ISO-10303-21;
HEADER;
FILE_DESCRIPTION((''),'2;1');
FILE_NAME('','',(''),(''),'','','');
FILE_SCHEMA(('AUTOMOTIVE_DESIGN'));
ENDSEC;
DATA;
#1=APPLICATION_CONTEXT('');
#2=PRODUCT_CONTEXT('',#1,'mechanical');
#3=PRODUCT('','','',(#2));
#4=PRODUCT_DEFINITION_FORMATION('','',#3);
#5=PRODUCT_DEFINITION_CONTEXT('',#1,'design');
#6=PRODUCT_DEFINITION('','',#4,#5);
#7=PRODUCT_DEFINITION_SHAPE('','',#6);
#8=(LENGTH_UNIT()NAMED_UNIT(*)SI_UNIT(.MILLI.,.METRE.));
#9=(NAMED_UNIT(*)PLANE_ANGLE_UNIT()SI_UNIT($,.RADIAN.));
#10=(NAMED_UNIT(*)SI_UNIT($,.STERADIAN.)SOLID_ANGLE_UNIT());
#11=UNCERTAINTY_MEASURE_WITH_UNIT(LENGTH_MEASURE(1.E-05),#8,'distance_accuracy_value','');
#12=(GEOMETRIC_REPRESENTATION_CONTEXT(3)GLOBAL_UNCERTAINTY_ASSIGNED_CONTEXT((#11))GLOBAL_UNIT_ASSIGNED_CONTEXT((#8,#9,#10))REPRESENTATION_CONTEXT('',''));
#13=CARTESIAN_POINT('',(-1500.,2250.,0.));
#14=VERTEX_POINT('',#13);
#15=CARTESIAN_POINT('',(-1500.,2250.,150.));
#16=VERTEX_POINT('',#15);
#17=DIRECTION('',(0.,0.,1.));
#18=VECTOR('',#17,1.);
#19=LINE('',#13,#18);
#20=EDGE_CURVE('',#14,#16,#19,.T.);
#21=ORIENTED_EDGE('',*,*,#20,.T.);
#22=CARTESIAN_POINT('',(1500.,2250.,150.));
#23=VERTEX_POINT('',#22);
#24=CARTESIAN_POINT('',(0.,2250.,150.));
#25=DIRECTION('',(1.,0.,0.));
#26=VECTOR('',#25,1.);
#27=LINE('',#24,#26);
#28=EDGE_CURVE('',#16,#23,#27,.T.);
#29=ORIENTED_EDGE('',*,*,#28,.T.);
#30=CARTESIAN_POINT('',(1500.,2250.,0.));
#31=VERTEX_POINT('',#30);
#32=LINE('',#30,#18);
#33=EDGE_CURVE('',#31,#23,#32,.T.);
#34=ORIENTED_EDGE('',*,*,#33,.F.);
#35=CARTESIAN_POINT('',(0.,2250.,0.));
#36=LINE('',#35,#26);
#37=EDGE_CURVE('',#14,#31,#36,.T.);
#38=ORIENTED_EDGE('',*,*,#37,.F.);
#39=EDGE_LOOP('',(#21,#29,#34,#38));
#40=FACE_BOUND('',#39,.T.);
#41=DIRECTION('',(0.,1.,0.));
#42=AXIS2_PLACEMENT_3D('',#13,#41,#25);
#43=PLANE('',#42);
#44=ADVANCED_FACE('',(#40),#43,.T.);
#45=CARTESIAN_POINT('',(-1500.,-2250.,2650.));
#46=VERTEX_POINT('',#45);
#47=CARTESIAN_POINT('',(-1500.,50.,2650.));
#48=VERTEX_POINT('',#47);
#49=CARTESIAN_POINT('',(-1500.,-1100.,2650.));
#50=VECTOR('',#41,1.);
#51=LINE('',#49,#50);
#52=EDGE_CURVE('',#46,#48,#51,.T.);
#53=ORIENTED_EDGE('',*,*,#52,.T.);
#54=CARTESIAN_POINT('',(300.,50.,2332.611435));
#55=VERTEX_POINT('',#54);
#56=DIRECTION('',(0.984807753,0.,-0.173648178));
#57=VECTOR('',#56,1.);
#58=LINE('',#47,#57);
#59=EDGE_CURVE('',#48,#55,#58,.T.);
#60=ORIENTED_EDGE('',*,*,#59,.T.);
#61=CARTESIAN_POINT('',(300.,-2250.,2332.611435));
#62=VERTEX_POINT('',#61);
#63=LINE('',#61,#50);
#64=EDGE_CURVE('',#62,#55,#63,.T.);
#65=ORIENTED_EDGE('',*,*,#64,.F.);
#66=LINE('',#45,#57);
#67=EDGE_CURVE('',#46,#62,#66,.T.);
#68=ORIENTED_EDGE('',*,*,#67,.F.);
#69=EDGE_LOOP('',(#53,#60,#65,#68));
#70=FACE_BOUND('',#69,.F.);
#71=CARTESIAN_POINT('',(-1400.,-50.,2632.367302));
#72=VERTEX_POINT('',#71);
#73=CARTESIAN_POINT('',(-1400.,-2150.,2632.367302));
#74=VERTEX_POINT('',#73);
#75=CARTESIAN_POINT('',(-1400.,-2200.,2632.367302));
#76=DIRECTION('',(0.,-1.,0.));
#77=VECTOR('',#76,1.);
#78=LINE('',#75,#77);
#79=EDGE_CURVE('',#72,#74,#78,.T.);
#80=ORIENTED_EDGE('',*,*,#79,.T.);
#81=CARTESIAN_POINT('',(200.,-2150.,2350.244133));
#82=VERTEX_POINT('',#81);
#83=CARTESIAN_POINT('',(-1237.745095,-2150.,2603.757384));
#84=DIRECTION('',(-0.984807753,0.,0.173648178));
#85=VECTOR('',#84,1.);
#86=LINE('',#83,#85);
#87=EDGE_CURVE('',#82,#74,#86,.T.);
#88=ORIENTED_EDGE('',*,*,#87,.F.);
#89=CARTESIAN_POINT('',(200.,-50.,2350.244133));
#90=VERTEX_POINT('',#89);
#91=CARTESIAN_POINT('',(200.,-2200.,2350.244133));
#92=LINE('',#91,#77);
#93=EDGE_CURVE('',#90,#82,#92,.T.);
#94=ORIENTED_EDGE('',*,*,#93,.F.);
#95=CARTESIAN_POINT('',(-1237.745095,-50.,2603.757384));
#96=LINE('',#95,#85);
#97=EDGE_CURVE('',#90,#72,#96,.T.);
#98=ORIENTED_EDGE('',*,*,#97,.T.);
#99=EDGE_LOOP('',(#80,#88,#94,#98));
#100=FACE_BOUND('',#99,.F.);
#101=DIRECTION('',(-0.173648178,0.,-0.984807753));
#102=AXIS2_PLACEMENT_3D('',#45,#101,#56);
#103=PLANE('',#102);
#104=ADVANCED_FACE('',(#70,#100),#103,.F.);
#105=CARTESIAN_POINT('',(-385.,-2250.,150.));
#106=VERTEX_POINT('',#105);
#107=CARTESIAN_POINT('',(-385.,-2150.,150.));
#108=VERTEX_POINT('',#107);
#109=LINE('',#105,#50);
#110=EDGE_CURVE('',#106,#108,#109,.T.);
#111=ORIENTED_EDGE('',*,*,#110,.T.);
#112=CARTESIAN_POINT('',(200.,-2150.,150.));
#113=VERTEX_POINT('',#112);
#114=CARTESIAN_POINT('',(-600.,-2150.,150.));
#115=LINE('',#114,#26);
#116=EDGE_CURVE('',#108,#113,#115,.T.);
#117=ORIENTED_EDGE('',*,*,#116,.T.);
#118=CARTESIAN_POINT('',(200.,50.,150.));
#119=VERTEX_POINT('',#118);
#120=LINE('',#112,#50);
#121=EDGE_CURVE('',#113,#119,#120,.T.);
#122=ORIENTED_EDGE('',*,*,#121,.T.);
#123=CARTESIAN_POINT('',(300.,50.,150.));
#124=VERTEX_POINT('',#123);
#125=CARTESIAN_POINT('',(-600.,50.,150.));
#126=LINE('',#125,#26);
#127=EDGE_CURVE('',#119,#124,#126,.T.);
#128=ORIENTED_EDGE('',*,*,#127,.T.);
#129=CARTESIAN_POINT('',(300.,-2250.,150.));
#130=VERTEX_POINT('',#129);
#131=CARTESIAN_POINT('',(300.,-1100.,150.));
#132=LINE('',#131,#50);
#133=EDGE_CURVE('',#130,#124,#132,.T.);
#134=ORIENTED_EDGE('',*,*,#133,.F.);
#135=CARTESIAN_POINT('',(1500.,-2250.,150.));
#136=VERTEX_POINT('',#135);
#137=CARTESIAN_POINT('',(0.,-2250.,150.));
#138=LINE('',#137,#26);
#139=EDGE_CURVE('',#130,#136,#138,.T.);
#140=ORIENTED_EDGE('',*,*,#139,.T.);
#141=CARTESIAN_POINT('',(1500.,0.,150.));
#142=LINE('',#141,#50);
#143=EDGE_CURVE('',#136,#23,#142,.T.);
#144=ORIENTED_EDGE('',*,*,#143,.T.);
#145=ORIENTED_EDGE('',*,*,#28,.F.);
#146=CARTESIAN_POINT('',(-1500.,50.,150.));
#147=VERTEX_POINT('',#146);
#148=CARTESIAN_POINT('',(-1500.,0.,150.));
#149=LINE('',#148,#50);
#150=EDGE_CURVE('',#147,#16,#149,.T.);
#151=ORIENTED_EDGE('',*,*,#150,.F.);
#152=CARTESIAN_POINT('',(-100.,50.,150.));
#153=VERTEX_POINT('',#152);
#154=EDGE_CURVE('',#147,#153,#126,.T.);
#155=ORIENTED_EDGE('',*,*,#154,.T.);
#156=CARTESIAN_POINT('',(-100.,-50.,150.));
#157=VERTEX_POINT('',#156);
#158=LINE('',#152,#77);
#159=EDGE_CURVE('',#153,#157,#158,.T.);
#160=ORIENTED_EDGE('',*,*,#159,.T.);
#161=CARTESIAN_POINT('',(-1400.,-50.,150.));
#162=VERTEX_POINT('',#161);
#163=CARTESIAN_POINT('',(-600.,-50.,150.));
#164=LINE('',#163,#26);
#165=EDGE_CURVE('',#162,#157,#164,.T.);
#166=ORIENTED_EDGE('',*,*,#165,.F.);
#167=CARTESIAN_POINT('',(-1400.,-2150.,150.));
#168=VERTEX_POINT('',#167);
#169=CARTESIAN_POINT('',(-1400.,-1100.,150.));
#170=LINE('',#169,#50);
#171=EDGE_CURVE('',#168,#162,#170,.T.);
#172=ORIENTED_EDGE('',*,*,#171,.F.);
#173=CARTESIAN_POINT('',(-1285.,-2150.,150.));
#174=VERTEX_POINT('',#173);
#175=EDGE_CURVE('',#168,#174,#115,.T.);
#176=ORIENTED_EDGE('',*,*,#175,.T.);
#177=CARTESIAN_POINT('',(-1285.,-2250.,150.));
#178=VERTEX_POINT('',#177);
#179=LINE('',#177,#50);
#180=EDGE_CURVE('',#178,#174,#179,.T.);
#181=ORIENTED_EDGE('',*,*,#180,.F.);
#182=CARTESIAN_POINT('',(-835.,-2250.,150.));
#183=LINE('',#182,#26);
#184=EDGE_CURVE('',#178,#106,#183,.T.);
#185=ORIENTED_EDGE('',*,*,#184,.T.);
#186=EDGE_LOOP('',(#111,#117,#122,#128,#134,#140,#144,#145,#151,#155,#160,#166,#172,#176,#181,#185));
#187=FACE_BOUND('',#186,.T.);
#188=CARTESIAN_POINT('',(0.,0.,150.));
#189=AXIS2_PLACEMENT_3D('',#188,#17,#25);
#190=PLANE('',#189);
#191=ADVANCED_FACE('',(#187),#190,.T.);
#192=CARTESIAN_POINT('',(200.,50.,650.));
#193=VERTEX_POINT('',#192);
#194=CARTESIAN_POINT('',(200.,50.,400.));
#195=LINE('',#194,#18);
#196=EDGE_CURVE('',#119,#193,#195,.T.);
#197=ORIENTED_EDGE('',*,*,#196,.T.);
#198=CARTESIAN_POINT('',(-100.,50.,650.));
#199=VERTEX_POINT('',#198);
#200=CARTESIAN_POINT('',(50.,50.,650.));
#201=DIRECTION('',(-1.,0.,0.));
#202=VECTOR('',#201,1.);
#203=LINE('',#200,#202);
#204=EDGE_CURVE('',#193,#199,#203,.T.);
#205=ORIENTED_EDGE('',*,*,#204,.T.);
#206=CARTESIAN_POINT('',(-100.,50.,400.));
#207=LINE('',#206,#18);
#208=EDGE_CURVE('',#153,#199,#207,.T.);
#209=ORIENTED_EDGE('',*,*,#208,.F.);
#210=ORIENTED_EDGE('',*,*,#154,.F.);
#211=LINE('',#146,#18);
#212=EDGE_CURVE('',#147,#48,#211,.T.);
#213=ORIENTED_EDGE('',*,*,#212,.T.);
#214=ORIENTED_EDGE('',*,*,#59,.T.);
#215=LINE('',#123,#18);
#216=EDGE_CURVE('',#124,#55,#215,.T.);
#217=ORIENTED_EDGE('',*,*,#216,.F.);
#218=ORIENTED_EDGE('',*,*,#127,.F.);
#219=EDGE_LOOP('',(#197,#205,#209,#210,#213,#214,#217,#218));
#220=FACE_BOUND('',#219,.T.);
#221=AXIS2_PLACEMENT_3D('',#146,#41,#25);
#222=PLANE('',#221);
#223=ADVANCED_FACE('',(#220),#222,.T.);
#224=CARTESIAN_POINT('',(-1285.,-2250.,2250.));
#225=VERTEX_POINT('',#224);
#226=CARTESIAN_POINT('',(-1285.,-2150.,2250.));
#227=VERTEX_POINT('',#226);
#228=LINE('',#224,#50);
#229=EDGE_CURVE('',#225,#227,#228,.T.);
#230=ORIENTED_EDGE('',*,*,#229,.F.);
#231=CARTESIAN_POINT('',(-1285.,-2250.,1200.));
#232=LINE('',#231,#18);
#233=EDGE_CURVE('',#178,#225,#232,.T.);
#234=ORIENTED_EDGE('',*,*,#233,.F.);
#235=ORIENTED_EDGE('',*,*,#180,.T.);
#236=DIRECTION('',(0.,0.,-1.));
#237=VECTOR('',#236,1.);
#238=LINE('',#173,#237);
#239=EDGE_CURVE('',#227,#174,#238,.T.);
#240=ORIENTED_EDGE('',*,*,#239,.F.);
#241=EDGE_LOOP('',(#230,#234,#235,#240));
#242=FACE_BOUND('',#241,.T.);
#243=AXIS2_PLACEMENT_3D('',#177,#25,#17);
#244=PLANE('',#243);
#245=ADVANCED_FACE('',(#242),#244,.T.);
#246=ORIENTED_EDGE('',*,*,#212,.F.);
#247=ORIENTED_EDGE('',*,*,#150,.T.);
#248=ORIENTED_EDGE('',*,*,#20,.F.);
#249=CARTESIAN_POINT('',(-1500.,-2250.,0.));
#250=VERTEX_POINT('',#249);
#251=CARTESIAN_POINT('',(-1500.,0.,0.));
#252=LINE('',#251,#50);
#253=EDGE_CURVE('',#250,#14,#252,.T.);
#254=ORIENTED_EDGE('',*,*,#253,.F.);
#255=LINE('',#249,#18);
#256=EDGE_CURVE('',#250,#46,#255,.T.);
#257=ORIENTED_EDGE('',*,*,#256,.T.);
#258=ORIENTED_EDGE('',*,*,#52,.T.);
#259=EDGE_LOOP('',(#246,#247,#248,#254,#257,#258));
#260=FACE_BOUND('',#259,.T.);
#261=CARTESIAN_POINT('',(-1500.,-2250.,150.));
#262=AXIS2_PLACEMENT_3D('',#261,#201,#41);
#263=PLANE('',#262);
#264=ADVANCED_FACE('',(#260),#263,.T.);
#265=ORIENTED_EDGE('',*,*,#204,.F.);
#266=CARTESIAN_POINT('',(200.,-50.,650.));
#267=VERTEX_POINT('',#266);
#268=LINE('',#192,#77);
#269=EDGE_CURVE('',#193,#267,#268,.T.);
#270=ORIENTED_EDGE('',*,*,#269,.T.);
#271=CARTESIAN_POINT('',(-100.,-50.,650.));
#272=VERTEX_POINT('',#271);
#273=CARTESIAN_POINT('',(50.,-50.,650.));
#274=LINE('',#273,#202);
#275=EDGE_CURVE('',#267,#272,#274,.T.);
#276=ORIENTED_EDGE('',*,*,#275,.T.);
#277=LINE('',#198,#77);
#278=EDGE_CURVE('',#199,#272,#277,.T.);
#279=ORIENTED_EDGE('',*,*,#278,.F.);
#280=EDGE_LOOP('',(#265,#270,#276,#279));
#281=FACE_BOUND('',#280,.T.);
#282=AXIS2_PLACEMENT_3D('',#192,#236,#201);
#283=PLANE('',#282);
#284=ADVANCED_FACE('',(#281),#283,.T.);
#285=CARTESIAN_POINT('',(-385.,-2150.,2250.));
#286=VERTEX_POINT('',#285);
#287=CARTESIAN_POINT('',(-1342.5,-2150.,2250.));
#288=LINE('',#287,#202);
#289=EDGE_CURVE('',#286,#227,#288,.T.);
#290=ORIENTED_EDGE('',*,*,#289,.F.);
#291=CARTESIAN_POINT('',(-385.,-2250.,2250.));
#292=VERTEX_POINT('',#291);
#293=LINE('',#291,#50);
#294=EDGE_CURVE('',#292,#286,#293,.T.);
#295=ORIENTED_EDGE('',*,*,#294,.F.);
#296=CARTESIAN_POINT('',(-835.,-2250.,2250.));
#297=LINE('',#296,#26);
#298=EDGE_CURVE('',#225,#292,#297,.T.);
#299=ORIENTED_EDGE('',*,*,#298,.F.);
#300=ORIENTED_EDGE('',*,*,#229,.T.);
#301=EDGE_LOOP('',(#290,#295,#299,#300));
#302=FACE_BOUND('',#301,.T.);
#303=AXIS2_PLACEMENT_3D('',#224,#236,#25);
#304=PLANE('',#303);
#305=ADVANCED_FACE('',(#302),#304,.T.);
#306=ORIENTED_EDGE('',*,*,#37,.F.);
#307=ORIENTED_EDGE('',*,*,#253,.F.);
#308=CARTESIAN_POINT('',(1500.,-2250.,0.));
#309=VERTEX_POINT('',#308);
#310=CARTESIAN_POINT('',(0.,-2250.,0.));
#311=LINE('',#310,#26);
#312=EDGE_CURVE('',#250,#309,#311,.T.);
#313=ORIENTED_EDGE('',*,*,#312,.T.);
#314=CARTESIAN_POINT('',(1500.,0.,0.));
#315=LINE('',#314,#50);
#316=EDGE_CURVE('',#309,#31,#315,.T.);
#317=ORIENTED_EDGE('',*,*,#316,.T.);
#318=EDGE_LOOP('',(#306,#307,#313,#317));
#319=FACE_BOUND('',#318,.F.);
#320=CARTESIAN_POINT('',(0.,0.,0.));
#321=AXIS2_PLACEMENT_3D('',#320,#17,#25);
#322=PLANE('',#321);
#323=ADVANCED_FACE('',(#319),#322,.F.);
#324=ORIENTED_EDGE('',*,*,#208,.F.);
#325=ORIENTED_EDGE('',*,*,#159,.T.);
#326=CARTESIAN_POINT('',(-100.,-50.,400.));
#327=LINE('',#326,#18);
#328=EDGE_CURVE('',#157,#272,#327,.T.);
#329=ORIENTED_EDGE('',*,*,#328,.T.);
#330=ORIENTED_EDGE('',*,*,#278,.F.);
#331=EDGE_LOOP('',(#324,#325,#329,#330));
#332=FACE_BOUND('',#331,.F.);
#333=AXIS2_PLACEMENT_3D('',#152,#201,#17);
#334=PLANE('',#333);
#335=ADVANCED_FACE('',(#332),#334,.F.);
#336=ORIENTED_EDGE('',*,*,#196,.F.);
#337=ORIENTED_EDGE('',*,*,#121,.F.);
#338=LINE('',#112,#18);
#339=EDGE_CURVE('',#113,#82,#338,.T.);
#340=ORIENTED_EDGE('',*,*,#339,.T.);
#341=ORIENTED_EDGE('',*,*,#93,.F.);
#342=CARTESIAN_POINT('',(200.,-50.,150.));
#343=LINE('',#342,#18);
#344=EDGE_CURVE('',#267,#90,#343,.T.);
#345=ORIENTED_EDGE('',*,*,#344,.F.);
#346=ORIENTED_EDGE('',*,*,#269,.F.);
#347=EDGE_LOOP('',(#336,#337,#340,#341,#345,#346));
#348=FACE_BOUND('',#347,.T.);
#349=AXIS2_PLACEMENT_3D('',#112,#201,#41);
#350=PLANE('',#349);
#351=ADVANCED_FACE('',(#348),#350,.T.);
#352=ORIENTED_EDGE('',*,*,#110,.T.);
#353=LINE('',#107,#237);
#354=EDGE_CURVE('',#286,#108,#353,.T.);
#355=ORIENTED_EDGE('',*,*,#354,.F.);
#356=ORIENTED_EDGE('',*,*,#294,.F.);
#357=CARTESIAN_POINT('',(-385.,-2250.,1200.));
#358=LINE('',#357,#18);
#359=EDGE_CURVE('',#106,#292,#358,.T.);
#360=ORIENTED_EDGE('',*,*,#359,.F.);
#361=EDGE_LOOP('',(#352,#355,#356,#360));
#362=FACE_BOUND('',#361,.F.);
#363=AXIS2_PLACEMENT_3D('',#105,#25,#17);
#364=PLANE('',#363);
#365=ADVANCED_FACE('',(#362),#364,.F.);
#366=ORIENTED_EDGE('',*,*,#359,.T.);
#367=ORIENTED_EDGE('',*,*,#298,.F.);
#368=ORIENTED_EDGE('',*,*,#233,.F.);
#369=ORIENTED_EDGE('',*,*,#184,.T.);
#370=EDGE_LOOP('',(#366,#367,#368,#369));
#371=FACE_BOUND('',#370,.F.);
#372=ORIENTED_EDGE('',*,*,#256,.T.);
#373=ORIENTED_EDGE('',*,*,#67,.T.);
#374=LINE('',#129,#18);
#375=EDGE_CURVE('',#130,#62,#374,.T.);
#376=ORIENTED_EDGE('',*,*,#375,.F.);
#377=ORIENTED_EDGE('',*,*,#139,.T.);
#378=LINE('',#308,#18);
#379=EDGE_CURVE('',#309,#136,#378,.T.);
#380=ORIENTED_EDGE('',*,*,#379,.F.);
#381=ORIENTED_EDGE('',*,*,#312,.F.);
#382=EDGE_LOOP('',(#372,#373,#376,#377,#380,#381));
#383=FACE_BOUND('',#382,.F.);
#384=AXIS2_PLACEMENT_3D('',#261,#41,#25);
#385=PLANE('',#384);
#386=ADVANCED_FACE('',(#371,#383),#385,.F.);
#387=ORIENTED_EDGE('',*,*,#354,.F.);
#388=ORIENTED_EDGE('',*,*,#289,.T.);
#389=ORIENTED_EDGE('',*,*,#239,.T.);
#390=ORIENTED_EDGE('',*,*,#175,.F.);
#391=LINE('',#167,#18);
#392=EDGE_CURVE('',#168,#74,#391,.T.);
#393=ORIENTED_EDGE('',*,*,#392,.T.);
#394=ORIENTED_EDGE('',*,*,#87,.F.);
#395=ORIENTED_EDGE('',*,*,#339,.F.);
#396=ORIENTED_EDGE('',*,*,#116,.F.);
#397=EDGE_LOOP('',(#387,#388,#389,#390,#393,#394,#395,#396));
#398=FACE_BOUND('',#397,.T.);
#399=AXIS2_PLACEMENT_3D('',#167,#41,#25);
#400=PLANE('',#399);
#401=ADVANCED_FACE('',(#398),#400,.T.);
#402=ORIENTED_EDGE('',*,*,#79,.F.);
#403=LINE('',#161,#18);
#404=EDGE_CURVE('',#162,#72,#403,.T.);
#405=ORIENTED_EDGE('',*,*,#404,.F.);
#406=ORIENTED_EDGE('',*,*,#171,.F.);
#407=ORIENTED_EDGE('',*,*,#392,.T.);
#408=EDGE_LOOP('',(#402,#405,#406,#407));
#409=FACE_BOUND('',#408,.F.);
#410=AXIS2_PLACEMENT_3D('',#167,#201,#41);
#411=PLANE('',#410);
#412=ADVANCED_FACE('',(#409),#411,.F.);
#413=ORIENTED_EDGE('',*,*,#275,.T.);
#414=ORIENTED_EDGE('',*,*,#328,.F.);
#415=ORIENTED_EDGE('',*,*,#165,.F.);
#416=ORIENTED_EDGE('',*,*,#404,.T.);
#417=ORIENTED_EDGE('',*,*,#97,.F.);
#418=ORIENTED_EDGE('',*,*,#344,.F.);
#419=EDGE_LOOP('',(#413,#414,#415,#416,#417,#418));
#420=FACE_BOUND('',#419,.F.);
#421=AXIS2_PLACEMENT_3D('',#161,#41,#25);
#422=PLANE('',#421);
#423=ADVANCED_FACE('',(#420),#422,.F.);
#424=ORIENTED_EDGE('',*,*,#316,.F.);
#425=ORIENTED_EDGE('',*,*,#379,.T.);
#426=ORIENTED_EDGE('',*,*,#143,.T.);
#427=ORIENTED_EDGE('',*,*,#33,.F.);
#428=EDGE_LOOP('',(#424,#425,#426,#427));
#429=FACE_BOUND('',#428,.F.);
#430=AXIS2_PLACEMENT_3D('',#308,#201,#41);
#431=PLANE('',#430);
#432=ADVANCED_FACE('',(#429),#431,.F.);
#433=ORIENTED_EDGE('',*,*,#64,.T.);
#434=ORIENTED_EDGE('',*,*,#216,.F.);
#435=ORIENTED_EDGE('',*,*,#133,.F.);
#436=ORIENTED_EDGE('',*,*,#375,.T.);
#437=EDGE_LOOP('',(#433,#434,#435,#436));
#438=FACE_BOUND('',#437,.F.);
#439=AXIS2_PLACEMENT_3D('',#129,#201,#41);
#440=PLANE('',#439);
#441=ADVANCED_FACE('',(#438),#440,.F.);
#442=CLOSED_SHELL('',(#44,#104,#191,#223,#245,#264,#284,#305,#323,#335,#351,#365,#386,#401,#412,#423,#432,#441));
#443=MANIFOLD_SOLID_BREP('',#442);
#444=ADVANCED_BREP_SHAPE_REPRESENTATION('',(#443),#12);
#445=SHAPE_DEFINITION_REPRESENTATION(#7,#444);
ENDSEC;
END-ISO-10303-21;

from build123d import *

# Parameters (mm, degrees)
F0_W      = 3000
F0_H      = 4500
F1_DEPTH  = 150
F2_W      = 1800
F2_H      = 2300
F2_W_2    = 1600
F2_H_2    = 2100
F4_DEPTH  = 2500
F6_DEPTH  = 2300
F7_W      = 900
F7_H      = 2100
F8_DEPTH  = 800
F9_W      = 300
F9_H      = 500
F10_DEPTH = 100


# Not quite as in the source:
# - a feature of the source that left no trace in its solid (it failed there, or was rolled back) is left out


with BuildPart() as f1:
    # F0 (on Top) → F1 (new body)
    with BuildSketch(Plane.XY):
        Rectangle(F0_W, F0_H)
    extrude(amount=F1_DEPTH)

    # F2 (on face) → F4 (join)
    with BuildSketch(Plane.XY.offset(150)):
        with Locations((-600, -1100)):
            Rectangle(F2_W, F2_H)
        with Locations((-600, -1100)):
            Rectangle(F2_W_2, F2_H_2, mode=Mode.SUBTRACT)
    extrude(amount=F4_DEPTH)

    # F5 (on face) → F6 (cut, through all)
    with BuildSketch(Plane.XZ.offset(2250)):
        Polygon((300, 2650), (-1500, 2650), (300, 2332.6114347248), align=None)
    extrude(amount=-F6_DEPTH, mode=Mode.SUBTRACT)

    # F7 (on face) → F8 (cut)
    with BuildSketch(Plane.XZ.offset(2250)):
        with Locations((-835, 1200)):
            Rectangle(F7_W, F7_H)
    extrude(amount=-F8_DEPTH, mode=Mode.SUBTRACT)

    # F9 (on face) → F10 (cut, through all)
    with BuildSketch(Plane(origin=(0, 50, 0), x_dir=(-1, 0, 0), z_dir=(0, 1, 0))):
        with Locations((-50, 400)):
            Rectangle(F9_W, F9_H)
    extrude(amount=-F10_DEPTH, mode=Mode.SUBTRACT)


solid = f1.part
